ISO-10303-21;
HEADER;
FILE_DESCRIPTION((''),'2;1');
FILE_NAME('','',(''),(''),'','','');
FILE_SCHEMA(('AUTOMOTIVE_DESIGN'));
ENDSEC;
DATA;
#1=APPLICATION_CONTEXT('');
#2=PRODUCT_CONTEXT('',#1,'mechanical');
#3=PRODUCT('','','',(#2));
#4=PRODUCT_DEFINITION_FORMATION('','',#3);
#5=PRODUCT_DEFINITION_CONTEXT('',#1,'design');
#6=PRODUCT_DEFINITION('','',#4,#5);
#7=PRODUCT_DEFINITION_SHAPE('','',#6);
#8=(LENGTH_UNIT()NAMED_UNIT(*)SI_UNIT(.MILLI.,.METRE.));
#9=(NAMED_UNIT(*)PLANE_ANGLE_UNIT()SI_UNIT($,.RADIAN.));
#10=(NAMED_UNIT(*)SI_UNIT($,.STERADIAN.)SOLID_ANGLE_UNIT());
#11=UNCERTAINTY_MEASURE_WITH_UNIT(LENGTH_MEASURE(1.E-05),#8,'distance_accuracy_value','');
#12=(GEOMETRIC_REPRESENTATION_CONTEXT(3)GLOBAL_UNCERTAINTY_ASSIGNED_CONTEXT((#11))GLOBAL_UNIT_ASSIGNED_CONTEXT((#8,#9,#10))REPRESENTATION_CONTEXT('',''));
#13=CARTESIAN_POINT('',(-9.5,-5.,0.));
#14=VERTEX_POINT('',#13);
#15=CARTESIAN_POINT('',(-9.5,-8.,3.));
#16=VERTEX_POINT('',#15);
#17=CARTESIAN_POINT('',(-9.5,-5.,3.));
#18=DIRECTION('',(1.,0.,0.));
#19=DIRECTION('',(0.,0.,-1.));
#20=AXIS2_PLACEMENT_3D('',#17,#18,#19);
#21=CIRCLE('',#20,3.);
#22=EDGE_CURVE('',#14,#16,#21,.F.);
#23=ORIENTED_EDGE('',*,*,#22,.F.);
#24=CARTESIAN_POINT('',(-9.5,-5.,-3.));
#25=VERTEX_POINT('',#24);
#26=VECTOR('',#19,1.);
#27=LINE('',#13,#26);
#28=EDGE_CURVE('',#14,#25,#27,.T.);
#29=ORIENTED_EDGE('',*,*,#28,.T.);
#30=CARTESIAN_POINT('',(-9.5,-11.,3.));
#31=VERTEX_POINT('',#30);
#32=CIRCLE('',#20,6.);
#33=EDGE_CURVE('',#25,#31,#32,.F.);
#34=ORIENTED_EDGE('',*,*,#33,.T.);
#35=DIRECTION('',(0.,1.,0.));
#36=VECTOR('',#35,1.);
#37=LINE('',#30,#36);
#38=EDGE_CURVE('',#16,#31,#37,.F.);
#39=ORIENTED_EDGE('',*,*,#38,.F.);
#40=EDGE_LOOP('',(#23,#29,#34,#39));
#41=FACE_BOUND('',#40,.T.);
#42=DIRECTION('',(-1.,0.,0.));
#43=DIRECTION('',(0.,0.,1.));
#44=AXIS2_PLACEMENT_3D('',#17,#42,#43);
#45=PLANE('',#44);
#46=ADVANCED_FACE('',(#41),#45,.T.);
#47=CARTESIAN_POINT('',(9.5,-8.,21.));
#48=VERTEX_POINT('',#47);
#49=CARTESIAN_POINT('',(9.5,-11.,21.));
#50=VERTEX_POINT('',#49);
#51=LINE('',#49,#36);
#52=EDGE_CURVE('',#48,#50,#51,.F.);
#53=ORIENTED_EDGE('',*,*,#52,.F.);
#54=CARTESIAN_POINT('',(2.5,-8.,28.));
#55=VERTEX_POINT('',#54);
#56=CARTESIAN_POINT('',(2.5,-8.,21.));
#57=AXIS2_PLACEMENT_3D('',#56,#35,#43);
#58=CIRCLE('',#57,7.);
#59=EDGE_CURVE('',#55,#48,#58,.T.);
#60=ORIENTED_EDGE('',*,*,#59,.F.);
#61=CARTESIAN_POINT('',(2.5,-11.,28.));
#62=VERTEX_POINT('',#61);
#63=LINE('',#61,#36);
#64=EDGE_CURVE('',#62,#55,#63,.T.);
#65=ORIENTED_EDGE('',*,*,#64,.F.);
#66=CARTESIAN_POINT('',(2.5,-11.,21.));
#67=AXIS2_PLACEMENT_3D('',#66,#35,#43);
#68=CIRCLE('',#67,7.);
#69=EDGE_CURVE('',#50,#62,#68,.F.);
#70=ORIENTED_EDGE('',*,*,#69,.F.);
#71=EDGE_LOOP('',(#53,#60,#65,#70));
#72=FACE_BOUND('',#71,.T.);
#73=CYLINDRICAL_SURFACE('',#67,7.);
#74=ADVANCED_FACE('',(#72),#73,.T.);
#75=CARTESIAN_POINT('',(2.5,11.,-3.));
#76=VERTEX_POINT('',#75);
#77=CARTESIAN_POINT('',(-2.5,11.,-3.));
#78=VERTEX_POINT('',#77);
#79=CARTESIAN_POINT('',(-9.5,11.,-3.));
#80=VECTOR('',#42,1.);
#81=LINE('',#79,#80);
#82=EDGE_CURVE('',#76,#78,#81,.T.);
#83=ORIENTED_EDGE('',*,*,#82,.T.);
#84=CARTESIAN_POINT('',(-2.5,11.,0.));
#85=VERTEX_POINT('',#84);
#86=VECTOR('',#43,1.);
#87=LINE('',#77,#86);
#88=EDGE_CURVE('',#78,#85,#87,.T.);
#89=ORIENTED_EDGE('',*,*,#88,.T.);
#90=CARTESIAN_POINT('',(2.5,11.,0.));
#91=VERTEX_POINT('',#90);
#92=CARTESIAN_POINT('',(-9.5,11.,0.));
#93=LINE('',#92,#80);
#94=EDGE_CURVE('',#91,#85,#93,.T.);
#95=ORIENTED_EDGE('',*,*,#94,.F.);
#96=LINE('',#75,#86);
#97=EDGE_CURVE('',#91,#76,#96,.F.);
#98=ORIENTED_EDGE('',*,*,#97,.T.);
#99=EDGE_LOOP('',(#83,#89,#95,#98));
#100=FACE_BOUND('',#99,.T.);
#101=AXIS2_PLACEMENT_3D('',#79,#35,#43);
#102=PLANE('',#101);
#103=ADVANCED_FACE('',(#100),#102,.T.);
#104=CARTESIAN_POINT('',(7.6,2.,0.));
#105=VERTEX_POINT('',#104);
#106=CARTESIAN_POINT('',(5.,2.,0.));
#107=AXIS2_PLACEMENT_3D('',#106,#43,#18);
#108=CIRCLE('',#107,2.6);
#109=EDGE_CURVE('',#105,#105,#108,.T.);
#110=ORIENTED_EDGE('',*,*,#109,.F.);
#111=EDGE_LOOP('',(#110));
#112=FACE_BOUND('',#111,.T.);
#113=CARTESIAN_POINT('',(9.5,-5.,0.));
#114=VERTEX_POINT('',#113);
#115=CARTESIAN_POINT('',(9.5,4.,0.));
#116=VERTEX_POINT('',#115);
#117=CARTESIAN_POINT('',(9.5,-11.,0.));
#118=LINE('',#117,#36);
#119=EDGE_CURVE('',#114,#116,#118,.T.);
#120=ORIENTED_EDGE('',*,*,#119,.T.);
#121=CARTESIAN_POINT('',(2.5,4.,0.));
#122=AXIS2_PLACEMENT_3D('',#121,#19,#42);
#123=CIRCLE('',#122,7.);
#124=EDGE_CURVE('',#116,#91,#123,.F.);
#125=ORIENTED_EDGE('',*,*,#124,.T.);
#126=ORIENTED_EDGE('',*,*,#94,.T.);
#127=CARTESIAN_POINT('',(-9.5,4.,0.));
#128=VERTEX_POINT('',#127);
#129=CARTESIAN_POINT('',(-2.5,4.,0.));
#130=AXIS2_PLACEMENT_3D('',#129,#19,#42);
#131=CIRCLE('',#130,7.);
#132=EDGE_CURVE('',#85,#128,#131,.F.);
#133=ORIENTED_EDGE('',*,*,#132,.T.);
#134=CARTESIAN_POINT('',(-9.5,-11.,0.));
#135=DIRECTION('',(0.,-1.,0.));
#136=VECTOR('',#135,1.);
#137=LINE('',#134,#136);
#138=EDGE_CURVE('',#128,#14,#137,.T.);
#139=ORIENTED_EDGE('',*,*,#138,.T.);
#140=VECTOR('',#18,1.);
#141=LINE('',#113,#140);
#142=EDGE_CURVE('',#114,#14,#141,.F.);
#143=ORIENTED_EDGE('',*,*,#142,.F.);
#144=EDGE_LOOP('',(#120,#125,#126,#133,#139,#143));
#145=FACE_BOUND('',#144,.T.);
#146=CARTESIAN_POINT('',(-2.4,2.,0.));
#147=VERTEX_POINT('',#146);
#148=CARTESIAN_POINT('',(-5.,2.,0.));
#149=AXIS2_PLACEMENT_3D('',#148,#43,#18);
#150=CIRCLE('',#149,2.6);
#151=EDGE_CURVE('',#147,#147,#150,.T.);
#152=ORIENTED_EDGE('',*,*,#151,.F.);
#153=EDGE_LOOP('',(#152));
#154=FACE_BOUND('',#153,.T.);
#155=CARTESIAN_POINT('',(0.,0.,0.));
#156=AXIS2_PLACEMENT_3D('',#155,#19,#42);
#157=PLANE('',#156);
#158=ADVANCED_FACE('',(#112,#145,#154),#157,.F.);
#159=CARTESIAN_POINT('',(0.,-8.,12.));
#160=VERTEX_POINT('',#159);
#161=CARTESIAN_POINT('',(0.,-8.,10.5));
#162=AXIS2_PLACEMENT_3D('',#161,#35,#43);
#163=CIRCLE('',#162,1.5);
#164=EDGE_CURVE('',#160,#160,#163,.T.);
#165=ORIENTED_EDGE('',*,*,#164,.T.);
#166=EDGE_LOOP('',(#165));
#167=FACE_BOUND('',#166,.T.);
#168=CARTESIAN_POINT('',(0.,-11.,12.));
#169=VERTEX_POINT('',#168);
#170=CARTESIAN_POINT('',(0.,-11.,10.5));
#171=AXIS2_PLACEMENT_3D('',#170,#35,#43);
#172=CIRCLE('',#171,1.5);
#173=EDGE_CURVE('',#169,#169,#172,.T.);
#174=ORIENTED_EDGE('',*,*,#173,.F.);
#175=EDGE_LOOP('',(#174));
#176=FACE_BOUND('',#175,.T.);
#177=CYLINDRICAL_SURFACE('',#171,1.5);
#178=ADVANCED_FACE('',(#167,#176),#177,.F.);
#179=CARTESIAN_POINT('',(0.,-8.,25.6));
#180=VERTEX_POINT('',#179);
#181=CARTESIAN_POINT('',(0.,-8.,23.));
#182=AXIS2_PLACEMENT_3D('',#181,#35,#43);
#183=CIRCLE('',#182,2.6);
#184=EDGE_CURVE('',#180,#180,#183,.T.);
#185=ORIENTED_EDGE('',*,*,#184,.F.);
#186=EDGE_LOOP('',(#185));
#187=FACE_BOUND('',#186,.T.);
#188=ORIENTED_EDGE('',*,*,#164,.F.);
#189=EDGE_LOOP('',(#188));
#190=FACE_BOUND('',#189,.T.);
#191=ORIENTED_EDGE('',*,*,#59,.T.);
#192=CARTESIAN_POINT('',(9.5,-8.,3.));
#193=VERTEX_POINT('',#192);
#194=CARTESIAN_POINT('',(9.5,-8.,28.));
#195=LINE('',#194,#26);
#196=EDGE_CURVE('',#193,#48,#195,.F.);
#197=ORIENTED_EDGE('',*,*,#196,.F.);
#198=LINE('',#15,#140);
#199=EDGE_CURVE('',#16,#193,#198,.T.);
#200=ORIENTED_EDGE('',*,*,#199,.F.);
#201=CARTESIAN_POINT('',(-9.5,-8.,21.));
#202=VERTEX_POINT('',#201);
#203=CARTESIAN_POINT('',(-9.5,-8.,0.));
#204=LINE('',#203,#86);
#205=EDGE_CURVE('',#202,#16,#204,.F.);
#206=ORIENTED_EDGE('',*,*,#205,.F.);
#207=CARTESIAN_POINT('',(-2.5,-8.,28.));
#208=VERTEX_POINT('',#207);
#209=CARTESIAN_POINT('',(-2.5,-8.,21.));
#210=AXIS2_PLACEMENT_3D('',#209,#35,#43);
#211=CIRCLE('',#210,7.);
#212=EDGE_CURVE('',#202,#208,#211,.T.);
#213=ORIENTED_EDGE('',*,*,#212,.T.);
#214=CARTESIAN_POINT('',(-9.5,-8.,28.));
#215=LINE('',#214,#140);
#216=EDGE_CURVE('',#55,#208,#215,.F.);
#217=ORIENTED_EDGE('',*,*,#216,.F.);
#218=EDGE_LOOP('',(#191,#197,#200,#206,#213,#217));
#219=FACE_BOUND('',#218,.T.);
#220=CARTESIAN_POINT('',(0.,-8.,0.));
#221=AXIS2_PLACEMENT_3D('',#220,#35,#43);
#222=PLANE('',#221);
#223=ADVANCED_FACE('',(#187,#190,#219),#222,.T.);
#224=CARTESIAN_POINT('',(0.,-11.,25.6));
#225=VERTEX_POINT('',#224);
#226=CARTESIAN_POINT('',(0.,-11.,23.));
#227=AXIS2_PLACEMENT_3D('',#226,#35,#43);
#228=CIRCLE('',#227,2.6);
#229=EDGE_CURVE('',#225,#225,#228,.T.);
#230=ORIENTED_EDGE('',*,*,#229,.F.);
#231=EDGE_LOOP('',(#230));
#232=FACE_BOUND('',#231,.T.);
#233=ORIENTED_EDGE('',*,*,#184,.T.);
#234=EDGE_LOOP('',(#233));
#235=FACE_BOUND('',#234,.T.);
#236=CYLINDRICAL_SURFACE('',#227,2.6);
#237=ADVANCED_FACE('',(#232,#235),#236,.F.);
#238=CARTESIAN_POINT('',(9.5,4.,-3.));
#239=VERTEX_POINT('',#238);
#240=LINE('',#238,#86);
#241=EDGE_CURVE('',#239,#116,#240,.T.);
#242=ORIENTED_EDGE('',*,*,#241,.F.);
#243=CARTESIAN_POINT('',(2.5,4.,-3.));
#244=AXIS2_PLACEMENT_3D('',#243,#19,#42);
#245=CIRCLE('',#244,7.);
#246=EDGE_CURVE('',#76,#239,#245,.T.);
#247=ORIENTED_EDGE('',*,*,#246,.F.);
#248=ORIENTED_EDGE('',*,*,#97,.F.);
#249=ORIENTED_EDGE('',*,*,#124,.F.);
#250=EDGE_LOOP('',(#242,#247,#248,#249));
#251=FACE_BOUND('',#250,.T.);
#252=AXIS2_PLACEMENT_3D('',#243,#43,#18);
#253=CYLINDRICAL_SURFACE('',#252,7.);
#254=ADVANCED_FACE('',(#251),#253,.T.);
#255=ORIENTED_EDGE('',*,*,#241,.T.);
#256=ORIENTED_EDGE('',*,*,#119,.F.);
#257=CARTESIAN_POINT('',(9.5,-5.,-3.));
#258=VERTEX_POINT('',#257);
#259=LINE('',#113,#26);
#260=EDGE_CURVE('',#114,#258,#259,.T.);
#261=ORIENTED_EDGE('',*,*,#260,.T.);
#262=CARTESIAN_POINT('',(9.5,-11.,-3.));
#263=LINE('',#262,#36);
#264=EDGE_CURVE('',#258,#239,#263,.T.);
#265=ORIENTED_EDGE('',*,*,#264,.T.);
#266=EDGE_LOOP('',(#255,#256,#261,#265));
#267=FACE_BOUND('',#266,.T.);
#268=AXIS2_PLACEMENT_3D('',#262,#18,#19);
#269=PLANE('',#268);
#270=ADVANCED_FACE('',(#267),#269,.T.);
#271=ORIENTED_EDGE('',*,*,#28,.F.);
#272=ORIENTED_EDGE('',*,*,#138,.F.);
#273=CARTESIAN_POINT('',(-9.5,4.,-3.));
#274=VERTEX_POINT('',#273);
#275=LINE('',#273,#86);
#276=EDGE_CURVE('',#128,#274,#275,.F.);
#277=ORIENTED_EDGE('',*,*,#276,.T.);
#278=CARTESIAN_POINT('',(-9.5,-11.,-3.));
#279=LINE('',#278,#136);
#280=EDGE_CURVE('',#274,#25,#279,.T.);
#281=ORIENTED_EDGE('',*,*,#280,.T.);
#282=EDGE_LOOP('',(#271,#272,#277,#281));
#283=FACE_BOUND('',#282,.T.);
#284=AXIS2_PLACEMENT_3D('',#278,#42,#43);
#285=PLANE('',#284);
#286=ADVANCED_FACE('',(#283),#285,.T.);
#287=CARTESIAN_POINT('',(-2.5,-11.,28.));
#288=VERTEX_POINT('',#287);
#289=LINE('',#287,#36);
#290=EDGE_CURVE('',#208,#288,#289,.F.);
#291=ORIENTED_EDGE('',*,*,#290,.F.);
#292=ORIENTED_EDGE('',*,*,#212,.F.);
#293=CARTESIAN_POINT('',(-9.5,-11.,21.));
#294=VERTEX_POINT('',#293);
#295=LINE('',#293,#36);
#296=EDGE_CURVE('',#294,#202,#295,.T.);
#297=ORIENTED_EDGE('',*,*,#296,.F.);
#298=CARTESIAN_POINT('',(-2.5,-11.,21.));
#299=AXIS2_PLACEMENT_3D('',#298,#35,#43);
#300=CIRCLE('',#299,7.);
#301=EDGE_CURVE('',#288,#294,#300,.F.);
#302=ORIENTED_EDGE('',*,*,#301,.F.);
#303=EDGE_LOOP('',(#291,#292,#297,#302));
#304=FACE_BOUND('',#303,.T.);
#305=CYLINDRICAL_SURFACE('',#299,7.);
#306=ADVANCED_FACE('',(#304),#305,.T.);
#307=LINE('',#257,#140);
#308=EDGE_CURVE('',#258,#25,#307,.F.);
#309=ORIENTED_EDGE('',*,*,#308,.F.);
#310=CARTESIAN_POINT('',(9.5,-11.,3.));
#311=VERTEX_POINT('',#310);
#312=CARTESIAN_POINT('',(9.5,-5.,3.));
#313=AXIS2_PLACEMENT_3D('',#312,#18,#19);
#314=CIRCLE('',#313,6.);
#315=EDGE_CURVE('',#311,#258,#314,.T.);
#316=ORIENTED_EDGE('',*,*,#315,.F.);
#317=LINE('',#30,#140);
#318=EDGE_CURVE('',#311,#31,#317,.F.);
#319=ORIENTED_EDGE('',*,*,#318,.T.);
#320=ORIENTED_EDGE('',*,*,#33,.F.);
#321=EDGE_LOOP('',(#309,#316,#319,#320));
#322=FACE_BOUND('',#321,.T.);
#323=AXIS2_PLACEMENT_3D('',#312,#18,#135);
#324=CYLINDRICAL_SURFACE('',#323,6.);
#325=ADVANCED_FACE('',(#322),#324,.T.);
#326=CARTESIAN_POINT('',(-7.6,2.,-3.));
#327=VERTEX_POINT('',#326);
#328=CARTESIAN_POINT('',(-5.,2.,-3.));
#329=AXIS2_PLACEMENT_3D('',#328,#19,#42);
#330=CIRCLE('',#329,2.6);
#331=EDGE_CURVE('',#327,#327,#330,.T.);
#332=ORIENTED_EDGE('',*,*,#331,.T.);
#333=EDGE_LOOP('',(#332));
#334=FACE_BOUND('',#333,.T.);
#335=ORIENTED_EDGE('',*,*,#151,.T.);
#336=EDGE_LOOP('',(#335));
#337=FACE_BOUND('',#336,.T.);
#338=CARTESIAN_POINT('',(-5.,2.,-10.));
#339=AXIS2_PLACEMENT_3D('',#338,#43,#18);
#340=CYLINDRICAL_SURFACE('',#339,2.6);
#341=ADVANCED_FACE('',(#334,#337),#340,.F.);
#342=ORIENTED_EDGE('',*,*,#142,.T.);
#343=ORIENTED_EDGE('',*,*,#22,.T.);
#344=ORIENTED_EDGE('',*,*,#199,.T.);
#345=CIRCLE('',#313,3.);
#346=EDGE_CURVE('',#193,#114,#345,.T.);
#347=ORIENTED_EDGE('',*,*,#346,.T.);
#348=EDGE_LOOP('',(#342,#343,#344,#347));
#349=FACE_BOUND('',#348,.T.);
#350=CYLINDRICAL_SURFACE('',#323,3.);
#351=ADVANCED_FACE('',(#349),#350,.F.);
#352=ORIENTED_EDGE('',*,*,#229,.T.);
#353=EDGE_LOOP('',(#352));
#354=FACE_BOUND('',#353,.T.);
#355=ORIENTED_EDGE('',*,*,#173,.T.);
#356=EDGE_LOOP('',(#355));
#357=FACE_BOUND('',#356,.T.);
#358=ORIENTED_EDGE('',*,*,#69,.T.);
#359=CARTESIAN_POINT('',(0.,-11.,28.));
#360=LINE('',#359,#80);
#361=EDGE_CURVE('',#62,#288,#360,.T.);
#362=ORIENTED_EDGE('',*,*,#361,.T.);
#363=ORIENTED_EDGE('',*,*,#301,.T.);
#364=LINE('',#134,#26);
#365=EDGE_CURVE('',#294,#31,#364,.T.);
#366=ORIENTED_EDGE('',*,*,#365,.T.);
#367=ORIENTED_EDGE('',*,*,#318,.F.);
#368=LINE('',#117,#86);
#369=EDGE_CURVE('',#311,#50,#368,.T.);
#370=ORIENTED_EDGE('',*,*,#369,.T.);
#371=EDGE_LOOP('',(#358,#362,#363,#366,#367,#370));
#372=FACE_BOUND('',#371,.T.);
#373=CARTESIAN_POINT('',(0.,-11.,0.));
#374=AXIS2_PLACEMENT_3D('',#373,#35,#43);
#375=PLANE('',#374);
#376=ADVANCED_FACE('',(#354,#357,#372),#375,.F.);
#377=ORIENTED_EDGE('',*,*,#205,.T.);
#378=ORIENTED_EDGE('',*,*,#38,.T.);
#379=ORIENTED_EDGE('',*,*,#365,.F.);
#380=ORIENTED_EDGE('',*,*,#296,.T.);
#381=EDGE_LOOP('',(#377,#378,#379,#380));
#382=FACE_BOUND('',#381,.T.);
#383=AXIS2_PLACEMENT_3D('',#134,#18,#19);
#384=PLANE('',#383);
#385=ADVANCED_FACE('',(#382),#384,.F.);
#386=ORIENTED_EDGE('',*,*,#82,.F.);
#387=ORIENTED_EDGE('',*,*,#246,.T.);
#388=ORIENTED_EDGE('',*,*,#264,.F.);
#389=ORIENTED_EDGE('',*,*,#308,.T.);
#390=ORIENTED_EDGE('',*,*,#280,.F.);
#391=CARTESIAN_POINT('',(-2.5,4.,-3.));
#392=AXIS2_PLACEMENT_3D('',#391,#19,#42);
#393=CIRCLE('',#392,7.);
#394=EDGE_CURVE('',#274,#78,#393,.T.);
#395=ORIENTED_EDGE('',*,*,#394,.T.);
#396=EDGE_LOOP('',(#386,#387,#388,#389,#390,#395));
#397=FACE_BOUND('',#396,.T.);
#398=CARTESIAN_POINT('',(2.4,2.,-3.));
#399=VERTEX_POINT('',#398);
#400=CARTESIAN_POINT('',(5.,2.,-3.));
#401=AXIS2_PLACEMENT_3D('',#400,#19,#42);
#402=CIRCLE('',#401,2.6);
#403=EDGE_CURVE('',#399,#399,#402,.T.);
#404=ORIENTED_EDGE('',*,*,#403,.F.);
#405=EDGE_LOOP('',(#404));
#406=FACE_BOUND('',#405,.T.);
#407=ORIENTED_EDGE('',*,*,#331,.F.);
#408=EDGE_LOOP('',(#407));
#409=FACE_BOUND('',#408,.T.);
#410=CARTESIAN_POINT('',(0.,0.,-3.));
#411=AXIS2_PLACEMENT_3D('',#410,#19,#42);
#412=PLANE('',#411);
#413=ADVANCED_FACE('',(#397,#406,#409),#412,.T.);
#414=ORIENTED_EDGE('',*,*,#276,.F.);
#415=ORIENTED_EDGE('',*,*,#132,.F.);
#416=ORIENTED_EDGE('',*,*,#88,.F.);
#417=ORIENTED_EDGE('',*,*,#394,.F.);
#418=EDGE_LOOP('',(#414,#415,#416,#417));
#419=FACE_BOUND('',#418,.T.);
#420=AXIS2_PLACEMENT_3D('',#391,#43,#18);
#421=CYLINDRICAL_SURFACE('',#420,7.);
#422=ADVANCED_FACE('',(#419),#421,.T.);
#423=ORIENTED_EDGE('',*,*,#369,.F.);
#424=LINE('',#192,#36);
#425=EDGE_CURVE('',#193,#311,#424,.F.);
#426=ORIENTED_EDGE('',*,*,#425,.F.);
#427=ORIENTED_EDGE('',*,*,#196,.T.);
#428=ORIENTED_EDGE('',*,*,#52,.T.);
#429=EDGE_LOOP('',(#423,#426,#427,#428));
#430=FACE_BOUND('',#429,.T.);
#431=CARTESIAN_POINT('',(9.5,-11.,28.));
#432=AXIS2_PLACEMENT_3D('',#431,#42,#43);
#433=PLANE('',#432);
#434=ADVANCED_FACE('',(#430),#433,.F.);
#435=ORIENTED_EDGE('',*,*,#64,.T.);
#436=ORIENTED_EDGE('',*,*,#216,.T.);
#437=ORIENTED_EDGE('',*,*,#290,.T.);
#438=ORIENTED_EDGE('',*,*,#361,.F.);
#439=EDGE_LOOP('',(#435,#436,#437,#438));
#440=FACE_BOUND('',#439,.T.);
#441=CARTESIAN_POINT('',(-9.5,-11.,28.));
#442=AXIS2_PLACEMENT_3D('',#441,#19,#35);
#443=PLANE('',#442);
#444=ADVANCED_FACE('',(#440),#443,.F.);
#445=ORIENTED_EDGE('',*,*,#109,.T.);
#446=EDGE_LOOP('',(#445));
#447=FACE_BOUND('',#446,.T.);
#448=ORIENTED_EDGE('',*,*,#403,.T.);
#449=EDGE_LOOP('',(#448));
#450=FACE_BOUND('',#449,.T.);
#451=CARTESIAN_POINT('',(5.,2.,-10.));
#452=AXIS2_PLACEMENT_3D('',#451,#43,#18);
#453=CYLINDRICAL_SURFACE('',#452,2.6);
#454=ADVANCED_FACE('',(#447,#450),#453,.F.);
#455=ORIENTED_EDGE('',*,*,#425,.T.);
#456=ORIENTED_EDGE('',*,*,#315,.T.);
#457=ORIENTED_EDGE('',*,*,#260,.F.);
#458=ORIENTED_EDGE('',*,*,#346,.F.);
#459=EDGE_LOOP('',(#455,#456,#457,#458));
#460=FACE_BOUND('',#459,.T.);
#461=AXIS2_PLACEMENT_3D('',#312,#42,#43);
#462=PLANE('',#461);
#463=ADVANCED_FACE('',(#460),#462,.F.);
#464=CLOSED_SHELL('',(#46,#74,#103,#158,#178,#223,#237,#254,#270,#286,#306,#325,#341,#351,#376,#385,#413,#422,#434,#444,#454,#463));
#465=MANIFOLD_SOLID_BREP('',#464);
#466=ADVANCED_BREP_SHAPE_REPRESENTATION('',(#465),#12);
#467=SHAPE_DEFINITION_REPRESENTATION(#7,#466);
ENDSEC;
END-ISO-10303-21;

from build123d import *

# Parameters (mm, degrees)
SKETCH1_W                    = 19
SKETCH1_H                    = 22
BASE_FLANGE1_DEPTH           = 3
EDGE_FLANGE1_STRIP_W         = 18
EDGE_FLANGE1_STRIP_H         = 3
EDGE_FLANGE1_STRIP_CUT_DEPTH = 19
EDGE_FLANGE1_DEPTH           = 19
SKETCH12_R                   = 2.6
CUT_EXTRUDE1_DEPTH           = 10
SKETCH13_R                   = 2.6
CUT_EXTRUDE2_DEPTH           = 36.146123542
FILLET1_R                    = 7
SKETCH14_R                   = 1.5
CUT_EXTRUDE3_DEPTH           = 36.146123542


# Sheet-metal steps are written as plain solids
with BuildPart() as part:
    # Sketch1 → Base-Flange1 (new body)
    with BuildSketch(Plane.XY):
        Rectangle(SKETCH1_W, SKETCH1_H)
    extrude(amount=-BASE_FLANGE1_DEPTH)

    # Edge-Flange1 strip (across the edge) → Edge-Flange1 strip cut (cut)
    with BuildSketch(Plane(origin=(-9.5, -11, 0), x_dir=(0, 1, 0), z_dir=(1, 0, 0))):
        with Locations((-3, -1.5)):
            Rectangle(EDGE_FLANGE1_STRIP_W, EDGE_FLANGE1_STRIP_H)
    extrude(amount=EDGE_FLANGE1_STRIP_CUT_DEPTH, mode=Mode.SUBTRACT)

    # Edge-Flange1 section (across the edge) → Edge-Flange1 (add)
    with BuildSketch(Plane(origin=(-9.5, -11, 0), x_dir=(0, 1, 0), z_dir=(1, 0, 0))):
        with BuildLine():
            Line((0, 3), (0, 28))
            Line((0, 28), (3, 28))
            Line((3, 28), (3, 3))
            ThreePointArc((3, 3), (3.878679656, 0.878679656), (6, 0))
            Line((6, 0), (6, -3))
            ThreePointArc((6, -3), (1.757359313, -1.242640687), (0, 3))
        make_face()
    extrude(amount=EDGE_FLANGE1_DEPTH)

    # Sketch12 → Cut-Extrude1 (cut)
    with BuildSketch(Plane.XY):
        with Locations((5, 2)):
            Circle(SKETCH12_R)
        with Locations((-5, 2)):
            Circle(SKETCH12_R)
    extrude(amount=-CUT_EXTRUDE1_DEPTH, mode=Mode.SUBTRACT)

    # Sketch13 → Cut-Extrude2 (cut, through all)
    with BuildSketch(Plane(origin=(0, -8, 0), x_dir=(1, 0, 0), z_dir=(0, 1, 0))):
        with Locations(Location((0, -23, 0), (0, 0, 270))):
            Circle(SKETCH13_R)
    extrude(amount=-CUT_EXTRUDE2_DEPTH, mode=Mode.SUBTRACT)

    # Fillet1
    fillet1_edges = [part.edges().sort_by_distance(p)[0] for p in [
        (-9.5, -9.5, 28),
        (9.5, -9.5, 28),
        (-9.5, 11, -1.5),
        (9.5, 11, -1.5),
    ]]
    fillet(fillet1_edges, radius=FILLET1_R)

    # Sketch14 → Cut-Extrude3 (cut, through all)
    with BuildSketch(Plane(origin=(0, -8, 0), x_dir=(1, 0, 0), z_dir=(0, 1, 0))):
        with Locations(Location((0, -10.5, 0), (0, 0, 270))):
            Circle(SKETCH14_R)
    extrude(amount=-CUT_EXTRUDE3_DEPTH, mode=Mode.SUBTRACT)


solid = part.part
